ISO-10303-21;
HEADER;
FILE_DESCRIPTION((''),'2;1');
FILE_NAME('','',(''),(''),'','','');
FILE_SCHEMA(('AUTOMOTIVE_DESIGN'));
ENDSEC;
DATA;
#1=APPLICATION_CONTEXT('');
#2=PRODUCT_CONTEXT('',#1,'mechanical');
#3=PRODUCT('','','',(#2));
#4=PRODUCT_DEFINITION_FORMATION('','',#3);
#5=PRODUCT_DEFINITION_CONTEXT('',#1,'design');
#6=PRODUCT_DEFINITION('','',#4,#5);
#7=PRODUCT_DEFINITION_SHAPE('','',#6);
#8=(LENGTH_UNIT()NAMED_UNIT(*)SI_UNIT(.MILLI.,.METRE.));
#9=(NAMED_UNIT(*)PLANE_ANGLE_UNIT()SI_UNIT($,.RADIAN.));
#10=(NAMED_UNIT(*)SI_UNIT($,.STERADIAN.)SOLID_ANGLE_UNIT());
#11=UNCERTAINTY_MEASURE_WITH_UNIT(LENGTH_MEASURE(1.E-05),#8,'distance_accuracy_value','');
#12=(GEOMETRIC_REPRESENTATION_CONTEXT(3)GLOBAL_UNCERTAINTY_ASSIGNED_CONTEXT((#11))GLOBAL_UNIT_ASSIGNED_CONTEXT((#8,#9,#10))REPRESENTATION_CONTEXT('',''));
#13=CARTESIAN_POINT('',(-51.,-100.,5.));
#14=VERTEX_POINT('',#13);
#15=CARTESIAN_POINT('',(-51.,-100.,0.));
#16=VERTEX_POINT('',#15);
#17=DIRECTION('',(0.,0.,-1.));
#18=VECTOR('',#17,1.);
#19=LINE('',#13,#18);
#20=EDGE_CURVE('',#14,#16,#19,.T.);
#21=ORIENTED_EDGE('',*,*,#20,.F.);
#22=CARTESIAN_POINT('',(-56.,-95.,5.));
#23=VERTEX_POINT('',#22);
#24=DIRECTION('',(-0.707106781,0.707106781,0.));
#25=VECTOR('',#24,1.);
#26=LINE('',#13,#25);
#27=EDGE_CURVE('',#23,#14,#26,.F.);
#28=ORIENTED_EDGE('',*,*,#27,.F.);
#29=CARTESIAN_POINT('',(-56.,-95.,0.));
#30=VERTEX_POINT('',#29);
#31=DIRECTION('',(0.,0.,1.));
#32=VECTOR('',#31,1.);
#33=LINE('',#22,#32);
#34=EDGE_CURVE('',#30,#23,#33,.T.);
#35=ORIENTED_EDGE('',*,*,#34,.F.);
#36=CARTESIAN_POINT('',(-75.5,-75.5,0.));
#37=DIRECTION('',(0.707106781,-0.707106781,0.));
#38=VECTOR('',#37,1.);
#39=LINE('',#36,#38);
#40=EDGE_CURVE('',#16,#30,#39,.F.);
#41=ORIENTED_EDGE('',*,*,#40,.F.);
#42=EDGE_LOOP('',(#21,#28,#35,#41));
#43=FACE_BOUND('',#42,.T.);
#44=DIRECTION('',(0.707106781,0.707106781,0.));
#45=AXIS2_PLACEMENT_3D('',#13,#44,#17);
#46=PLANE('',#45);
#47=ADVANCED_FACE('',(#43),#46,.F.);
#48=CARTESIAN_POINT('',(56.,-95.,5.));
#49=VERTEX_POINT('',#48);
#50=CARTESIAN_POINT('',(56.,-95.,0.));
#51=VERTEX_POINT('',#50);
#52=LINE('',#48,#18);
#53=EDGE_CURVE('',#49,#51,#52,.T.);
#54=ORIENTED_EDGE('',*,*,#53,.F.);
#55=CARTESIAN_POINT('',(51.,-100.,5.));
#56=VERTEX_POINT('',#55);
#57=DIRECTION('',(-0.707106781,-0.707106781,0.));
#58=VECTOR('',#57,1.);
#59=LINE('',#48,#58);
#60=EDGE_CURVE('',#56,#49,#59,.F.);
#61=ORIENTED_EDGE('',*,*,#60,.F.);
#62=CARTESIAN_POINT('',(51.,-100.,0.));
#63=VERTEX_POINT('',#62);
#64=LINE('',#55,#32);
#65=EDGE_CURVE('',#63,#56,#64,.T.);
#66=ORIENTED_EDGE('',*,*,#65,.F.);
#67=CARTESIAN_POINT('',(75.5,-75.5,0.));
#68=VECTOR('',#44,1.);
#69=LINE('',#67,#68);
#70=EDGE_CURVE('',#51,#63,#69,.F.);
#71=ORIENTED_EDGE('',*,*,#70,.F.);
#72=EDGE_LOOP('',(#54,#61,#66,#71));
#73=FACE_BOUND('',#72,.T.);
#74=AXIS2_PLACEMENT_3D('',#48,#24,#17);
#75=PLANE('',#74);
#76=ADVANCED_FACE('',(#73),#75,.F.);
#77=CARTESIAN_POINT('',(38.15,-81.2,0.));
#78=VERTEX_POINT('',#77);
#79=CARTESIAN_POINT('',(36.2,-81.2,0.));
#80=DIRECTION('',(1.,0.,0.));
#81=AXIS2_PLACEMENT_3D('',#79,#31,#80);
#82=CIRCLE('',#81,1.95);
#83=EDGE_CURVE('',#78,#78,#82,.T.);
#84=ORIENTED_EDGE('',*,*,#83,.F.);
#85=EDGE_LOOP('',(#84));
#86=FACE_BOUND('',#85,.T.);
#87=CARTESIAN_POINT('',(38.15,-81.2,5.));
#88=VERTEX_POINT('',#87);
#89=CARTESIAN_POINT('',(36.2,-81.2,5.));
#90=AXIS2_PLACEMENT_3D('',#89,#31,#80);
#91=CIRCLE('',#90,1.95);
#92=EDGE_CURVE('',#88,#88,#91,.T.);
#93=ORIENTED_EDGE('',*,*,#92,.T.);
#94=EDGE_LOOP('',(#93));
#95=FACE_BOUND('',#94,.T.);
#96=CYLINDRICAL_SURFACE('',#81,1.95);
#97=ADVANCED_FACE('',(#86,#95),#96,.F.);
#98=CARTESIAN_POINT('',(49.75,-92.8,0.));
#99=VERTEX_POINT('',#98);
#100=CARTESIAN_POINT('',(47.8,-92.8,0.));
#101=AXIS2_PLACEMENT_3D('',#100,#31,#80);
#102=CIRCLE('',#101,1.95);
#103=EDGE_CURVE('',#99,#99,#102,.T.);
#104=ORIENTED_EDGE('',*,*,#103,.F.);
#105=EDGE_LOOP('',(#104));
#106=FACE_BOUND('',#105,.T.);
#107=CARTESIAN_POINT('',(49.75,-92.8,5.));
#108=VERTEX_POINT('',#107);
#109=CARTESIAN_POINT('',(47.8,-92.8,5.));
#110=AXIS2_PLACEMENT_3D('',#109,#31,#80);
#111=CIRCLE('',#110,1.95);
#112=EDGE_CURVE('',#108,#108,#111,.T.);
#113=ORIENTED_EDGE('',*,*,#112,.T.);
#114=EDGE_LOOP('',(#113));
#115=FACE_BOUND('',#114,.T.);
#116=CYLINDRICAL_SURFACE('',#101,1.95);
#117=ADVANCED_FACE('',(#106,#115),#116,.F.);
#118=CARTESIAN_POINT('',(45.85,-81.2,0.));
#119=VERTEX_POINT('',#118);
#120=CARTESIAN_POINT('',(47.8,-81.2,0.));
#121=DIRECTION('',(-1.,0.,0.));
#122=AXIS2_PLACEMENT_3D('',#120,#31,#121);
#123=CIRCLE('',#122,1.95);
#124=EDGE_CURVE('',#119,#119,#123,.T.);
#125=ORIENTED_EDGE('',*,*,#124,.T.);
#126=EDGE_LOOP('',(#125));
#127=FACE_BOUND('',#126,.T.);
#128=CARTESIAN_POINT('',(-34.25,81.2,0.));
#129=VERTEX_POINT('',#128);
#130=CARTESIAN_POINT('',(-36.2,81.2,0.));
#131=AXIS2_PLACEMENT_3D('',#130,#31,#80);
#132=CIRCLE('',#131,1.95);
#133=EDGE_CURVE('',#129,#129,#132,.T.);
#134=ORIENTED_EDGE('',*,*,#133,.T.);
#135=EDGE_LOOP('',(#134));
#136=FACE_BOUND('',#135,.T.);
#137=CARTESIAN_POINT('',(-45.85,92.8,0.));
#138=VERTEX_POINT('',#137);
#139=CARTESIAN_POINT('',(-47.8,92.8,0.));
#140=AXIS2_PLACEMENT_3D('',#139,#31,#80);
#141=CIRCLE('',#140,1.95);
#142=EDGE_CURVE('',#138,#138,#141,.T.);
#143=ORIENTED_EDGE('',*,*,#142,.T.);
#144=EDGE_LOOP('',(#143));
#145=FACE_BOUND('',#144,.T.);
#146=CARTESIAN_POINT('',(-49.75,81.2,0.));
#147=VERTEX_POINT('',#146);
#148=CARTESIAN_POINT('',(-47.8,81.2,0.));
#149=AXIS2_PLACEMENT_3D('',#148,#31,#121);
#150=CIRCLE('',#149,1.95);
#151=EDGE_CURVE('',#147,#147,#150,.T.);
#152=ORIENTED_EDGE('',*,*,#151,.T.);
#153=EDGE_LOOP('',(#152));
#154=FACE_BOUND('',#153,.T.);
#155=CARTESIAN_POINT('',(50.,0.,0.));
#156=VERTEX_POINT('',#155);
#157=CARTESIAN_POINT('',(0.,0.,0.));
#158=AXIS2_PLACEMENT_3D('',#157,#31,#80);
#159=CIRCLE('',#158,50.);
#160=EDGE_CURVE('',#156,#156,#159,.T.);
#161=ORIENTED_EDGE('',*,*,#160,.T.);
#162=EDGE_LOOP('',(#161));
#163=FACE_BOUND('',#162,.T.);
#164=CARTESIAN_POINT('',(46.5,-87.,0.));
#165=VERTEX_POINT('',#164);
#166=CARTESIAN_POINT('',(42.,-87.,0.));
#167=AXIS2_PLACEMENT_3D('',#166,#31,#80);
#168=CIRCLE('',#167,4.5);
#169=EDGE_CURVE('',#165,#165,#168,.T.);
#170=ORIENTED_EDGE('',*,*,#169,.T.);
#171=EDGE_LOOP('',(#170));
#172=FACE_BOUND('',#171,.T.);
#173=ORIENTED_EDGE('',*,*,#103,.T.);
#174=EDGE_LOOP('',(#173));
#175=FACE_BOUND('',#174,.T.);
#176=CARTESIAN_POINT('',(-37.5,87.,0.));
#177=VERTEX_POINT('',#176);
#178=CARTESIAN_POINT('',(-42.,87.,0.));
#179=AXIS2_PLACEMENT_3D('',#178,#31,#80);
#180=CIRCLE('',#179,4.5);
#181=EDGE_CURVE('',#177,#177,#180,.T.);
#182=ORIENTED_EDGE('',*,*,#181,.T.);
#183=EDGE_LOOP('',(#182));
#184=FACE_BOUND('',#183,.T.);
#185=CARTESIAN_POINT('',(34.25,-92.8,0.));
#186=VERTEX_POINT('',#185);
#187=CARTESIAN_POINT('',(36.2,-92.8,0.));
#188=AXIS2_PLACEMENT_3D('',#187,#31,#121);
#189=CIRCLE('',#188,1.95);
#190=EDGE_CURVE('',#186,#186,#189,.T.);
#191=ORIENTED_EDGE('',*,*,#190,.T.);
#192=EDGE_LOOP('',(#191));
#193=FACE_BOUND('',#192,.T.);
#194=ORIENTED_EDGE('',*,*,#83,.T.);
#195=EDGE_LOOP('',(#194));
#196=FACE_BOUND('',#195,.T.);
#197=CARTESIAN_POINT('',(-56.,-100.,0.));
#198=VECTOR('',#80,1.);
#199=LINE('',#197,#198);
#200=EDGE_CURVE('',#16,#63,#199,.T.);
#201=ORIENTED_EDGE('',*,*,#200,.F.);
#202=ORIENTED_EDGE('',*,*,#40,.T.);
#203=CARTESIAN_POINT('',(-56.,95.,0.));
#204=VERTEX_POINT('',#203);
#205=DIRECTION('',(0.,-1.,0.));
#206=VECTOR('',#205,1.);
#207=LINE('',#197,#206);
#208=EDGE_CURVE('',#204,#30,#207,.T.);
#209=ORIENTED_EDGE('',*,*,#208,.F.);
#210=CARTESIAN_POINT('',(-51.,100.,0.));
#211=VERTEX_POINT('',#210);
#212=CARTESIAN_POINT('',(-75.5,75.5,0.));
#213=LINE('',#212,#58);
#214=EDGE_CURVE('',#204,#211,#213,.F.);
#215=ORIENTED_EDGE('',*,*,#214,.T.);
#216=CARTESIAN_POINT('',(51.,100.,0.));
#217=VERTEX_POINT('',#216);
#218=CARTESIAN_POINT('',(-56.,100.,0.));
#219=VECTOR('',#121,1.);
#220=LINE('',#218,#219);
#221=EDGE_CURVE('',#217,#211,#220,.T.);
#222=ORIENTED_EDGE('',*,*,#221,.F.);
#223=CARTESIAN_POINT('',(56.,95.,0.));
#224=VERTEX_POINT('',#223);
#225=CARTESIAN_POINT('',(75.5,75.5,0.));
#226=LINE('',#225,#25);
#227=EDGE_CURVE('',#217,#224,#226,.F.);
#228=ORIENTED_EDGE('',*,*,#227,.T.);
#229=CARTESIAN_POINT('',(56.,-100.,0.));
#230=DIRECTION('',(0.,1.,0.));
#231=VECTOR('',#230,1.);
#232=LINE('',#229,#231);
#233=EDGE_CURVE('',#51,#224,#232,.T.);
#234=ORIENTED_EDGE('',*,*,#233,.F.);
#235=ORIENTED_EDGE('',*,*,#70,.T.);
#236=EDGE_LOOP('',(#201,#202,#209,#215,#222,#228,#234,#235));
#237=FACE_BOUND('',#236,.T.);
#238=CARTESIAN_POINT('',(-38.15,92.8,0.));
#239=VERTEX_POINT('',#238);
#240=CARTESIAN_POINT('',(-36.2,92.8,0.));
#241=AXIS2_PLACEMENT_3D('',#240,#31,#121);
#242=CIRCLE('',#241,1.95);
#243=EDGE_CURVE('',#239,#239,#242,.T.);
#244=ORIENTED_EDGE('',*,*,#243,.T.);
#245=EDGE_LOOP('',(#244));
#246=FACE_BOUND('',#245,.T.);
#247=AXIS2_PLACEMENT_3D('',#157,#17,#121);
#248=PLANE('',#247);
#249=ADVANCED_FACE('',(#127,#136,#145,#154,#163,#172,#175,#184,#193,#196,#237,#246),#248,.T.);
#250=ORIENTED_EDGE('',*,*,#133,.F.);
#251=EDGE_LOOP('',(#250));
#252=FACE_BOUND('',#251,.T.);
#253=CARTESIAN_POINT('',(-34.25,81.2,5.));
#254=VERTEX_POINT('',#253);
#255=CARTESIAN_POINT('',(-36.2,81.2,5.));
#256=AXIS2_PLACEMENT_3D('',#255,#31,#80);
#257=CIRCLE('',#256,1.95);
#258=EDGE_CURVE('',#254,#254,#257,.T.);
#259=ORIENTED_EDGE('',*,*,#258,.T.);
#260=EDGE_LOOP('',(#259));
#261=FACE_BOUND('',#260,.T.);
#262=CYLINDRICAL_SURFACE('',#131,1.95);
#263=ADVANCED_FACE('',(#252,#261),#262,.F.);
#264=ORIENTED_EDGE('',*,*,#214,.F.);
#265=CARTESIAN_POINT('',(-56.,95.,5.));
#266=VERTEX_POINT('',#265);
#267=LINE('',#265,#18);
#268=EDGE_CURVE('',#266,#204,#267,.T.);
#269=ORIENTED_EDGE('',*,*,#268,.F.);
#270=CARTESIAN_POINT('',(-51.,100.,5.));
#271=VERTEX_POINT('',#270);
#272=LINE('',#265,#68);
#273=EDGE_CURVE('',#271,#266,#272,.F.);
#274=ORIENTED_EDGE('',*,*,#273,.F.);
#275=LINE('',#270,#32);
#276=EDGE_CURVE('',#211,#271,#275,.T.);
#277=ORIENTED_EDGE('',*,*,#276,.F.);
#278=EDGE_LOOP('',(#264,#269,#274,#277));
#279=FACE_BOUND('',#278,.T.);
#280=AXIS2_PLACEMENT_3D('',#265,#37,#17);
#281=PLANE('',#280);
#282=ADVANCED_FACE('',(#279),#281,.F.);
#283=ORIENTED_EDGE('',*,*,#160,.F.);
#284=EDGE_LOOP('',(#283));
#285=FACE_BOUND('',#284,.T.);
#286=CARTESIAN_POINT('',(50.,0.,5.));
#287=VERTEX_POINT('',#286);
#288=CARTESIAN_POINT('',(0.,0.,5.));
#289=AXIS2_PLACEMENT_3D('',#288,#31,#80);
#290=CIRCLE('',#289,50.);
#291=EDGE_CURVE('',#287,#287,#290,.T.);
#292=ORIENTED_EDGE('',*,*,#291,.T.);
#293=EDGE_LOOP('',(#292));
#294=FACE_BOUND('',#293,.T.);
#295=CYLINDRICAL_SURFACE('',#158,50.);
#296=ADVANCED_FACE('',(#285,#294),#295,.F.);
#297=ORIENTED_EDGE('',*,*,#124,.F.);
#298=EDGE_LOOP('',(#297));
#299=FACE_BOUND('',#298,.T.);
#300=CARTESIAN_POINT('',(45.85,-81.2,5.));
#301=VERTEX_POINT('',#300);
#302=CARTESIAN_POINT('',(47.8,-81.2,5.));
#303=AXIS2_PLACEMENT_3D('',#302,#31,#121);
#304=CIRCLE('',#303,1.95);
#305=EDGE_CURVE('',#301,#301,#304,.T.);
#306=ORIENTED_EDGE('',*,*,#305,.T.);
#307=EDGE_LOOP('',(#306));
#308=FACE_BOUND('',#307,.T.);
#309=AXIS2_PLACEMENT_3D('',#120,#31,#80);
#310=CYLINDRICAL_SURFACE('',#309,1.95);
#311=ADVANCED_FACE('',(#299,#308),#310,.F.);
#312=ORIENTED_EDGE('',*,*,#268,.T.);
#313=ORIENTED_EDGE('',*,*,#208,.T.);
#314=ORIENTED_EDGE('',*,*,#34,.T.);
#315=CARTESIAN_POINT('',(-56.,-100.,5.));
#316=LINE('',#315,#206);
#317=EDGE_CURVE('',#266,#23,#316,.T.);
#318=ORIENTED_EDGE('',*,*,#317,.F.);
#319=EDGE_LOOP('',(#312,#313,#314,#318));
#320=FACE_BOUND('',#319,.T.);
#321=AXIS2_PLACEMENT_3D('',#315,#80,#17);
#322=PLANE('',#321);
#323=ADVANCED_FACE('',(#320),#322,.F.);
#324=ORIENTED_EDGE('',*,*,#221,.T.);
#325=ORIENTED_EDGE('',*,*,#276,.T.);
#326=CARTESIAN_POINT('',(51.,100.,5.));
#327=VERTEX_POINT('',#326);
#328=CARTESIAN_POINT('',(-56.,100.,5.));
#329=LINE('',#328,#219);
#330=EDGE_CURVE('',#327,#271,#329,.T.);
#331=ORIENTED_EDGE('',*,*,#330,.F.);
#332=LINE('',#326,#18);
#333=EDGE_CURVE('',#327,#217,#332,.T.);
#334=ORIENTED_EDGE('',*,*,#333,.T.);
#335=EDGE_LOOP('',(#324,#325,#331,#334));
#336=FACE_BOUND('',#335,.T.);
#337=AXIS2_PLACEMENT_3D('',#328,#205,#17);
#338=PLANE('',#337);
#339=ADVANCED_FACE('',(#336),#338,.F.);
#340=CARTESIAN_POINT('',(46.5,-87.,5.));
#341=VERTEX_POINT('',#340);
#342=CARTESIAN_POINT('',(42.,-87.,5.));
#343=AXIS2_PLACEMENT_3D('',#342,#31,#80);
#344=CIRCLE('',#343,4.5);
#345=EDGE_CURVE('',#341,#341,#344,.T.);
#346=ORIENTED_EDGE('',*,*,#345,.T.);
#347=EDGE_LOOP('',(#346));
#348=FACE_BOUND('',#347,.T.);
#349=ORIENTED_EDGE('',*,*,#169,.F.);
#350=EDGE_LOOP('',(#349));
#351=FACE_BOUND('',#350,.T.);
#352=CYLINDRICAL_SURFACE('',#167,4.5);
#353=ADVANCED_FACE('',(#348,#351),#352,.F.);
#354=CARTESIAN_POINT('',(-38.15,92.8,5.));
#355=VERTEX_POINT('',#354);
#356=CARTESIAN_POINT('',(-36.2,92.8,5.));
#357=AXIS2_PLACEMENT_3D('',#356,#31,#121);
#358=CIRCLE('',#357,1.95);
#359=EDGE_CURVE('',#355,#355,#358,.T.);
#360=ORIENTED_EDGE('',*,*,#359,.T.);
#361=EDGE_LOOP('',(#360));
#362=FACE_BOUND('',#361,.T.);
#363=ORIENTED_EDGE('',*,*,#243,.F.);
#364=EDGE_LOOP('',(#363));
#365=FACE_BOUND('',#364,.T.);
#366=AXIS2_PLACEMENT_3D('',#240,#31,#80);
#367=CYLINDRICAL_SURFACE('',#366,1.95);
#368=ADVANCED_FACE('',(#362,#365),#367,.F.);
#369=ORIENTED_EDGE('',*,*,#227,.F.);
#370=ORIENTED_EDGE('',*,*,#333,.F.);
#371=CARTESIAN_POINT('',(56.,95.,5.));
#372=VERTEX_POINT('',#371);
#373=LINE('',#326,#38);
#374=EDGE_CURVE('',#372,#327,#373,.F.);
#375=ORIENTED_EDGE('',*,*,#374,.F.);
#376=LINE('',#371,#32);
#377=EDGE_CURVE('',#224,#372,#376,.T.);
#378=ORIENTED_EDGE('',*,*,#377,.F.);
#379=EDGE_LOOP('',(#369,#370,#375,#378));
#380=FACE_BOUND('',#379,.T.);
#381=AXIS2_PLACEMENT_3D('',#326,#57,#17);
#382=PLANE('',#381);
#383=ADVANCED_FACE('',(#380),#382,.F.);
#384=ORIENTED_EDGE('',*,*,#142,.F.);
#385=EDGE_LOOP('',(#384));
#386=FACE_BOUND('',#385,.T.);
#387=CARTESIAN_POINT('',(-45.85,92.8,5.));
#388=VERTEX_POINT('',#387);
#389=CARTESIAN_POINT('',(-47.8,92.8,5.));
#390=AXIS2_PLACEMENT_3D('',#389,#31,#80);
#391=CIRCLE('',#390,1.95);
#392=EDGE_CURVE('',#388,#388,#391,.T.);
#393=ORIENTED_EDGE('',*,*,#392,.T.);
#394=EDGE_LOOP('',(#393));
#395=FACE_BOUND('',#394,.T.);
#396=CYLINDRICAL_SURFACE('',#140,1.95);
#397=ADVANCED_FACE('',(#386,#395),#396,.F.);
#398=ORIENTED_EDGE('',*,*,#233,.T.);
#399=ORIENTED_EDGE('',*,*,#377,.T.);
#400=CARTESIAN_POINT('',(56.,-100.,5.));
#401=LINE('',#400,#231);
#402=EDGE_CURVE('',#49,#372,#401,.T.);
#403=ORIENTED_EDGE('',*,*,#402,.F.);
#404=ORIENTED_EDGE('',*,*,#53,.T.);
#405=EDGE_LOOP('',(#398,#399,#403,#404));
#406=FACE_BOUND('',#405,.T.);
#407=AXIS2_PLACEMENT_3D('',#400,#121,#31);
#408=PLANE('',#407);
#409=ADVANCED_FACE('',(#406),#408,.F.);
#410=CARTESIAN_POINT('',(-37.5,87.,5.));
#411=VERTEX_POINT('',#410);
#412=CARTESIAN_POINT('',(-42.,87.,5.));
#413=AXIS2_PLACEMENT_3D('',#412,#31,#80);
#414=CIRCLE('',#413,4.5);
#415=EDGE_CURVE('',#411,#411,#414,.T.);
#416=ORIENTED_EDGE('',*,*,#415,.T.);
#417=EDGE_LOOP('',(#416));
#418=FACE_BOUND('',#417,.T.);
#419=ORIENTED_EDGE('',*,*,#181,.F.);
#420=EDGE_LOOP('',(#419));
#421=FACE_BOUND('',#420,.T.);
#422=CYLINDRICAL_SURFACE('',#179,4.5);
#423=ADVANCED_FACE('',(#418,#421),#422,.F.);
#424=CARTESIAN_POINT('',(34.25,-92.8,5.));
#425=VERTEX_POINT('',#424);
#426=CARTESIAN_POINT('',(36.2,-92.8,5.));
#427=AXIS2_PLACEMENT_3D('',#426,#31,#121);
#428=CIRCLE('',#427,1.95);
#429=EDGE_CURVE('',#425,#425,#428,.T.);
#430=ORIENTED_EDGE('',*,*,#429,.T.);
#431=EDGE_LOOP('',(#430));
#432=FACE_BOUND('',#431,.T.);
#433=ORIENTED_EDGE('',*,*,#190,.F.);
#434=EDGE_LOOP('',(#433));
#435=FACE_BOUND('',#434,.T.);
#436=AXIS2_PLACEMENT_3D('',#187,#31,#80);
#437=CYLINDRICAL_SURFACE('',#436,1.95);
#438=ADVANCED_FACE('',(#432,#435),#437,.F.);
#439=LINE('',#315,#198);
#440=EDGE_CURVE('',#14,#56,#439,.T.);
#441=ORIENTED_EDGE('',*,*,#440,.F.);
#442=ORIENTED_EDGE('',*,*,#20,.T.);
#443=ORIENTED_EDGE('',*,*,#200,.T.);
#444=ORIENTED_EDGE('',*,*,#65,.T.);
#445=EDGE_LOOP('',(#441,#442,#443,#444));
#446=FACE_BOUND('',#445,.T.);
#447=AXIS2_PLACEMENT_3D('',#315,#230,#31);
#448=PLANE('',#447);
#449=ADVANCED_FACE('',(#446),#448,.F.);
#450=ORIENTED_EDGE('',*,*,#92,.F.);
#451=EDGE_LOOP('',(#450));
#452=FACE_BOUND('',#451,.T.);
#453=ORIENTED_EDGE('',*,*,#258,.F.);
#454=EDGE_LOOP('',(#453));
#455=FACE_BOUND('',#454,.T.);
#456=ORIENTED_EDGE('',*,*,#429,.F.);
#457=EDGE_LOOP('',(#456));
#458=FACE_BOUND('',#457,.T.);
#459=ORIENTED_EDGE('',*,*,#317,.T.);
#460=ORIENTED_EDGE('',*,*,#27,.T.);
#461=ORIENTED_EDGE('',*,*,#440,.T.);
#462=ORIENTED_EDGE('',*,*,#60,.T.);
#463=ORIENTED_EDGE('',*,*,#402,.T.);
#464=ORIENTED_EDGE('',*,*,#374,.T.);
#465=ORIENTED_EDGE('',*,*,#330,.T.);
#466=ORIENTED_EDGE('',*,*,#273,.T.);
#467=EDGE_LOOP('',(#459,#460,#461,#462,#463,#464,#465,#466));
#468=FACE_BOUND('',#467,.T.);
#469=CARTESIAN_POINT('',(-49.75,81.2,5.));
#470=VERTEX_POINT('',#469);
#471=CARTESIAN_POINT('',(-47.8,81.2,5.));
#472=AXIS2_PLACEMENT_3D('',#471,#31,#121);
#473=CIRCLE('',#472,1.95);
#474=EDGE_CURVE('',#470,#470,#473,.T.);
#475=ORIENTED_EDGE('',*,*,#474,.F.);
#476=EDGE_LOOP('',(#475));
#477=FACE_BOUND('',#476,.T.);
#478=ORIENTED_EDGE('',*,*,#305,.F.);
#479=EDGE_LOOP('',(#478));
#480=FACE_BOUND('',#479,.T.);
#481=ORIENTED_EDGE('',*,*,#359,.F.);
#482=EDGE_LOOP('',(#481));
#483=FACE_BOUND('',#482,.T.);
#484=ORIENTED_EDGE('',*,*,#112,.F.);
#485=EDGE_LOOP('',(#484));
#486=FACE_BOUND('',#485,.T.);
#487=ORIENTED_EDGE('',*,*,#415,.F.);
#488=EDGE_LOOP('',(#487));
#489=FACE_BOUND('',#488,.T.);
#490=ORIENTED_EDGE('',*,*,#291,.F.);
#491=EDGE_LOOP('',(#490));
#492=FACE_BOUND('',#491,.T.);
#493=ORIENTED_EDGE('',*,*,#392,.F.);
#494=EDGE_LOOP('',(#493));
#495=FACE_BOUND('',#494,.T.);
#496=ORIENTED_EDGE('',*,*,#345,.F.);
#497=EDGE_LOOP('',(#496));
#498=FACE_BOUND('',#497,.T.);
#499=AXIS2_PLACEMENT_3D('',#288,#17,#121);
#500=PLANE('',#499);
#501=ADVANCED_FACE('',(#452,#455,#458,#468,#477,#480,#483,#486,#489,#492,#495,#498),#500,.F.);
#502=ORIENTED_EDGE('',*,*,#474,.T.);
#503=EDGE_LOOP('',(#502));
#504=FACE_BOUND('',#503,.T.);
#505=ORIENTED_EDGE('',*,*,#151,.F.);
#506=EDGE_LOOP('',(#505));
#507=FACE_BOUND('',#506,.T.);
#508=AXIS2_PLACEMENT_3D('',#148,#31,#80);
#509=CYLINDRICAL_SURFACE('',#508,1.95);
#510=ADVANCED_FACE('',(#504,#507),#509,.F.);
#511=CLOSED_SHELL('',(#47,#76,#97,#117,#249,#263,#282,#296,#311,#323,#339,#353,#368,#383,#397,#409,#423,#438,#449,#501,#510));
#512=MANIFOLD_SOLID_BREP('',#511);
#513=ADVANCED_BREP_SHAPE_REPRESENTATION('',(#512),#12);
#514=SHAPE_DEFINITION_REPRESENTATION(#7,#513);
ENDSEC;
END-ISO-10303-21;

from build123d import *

# Parameters (mm, degrees)
SKETCH1_W               = 112
SKETCH1_H               = 200
BOSS_EXTRUDE1_DEPTH     = 5
SKETCH6_R               = 4.5
SKETCH6_R_2             = 1.95
LEANDUT_HOLES_DEPTH     = 115.721401665
CHAMFER1_SIZE           = 5
SKETCH7_R               = 50
CUT_EXTRUDE3_DEPTH      = 115.721401665
DELETEFACE1_OUTLINE_R   = 1.95
DELETEFACE1_OUTLINE_R_2 = 4.5
DELETEFACE1_DEPTH       = 5


# Read off the part's stored shape, not the designer's step: DeleteFace1
with BuildPart() as part:
    # Sketch1 → Boss-Extrude1 (new body)
    with BuildSketch(Plane.XY):
        Rectangle(SKETCH1_W, SKETCH1_H)
    extrude(amount=BOSS_EXTRUDE1_DEPTH)

    # Sketch6 → Leandut_holes (cut, through all)
    with BuildSketch(Plane.XY.offset(5)):
        with Locations((-42, 87)):
            Circle(SKETCH6_R)
        with Locations((-47.8, 92.8)):
            Circle(SKETCH6_R_2)
        with Locations(Location((-47.8, 81.2, 0), (0, 0, 180))):
            Circle(SKETCH6_R_2)
        with Locations((-36.2, 81.2)):
            Circle(SKETCH6_R_2)
        with Locations(Location((-36.2, 92.8, 0), (0, 0, 180))):
            Circle(SKETCH6_R_2)
        with Locations((36.2, 92.8)):
            Circle(SKETCH6_R_2)
        with Locations(Location((36.2, 81.2, 0), (0, 0, 180))):
            Circle(SKETCH6_R_2)
        with Locations((47.8, 81.2)):
            Circle(SKETCH6_R_2)
        with Locations(Location((47.8, 92.8, 0), (0, 0, 180))):
            Circle(SKETCH6_R_2)
        with Locations(Location((42, 87, 0), (0, 0, 180))):
            Circle(SKETCH6_R)
        with Locations((42, -87)):
            Circle(SKETCH6_R)
        with Locations((47.8, -92.8)):
            Circle(SKETCH6_R_2)
        with Locations(Location((47.8, -81.2, 0), (0, 0, 180))):
            Circle(SKETCH6_R_2)
        with Locations((36.2, -81.2)):
            Circle(SKETCH6_R_2)
        with Locations(Location((36.2, -92.8, 0), (0, 0, 180))):
            Circle(SKETCH6_R_2)
        with Locations((-36.2, -92.8)):
            Circle(SKETCH6_R_2)
        with Locations(Location((-36.2, -81.2, 0), (0, 0, 180))):
            Circle(SKETCH6_R_2)
        with Locations((-47.8, -81.2)):
            Circle(SKETCH6_R_2)
        with Locations(Location((-47.8, -92.8, 0), (0, 0, 180))):
            Circle(SKETCH6_R_2)
        with Locations(Location((-42, -87, 0), (0, 0, 180))):
            Circle(SKETCH6_R)
    extrude(amount=-LEANDUT_HOLES_DEPTH, mode=Mode.SUBTRACT)

    # Chamfer1
    chamfer1_edges = [part.edges().sort_by_distance(p)[0] for p in [
        (56, -100, 2.5),
        (-56, -100, 2.5),
        (-56, 100, 2.5),
        (56, 100, 2.5),
    ]]
    chamfer(chamfer1_edges, length=CHAMFER1_SIZE)

    # Sketch7 → Cut-Extrude3 (cut, through all)
    with BuildSketch(Plane.XY.offset(5)):
        Circle(SKETCH7_R)
    extrude(amount=-CUT_EXTRUDE3_DEPTH, mode=Mode.SUBTRACT)

    # DeleteFace1 outline → DeleteFace1 (add)
    with BuildSketch(Plane.XY):
        with Locations((-47.8, -81.2)):
            Circle(DELETEFACE1_OUTLINE_R)
        with Locations((-47.8, -92.8)):
            Circle(DELETEFACE1_OUTLINE_R)
        with Locations((-42, -87)):
            Circle(DELETEFACE1_OUTLINE_R_2)
        with Locations((36.2, 92.8)):
            Circle(DELETEFACE1_OUTLINE_R)
        with Locations((36.2, 81.2)):
            Circle(DELETEFACE1_OUTLINE_R)
        with Locations((47.8, 81.2)):
            Circle(DELETEFACE1_OUTLINE_R)
        with Locations((47.8, 92.8)):
            Circle(DELETEFACE1_OUTLINE_R)
        with Locations((-36.2, -81.2)):
            Circle(DELETEFACE1_OUTLINE_R)
        with Locations((-36.2, -92.8)):
            Circle(DELETEFACE1_OUTLINE_R)
        with Locations((42, 87)):
            Circle(DELETEFACE1_OUTLINE_R_2)
    extrude(amount=DELETEFACE1_DEPTH)


solid = part.part
